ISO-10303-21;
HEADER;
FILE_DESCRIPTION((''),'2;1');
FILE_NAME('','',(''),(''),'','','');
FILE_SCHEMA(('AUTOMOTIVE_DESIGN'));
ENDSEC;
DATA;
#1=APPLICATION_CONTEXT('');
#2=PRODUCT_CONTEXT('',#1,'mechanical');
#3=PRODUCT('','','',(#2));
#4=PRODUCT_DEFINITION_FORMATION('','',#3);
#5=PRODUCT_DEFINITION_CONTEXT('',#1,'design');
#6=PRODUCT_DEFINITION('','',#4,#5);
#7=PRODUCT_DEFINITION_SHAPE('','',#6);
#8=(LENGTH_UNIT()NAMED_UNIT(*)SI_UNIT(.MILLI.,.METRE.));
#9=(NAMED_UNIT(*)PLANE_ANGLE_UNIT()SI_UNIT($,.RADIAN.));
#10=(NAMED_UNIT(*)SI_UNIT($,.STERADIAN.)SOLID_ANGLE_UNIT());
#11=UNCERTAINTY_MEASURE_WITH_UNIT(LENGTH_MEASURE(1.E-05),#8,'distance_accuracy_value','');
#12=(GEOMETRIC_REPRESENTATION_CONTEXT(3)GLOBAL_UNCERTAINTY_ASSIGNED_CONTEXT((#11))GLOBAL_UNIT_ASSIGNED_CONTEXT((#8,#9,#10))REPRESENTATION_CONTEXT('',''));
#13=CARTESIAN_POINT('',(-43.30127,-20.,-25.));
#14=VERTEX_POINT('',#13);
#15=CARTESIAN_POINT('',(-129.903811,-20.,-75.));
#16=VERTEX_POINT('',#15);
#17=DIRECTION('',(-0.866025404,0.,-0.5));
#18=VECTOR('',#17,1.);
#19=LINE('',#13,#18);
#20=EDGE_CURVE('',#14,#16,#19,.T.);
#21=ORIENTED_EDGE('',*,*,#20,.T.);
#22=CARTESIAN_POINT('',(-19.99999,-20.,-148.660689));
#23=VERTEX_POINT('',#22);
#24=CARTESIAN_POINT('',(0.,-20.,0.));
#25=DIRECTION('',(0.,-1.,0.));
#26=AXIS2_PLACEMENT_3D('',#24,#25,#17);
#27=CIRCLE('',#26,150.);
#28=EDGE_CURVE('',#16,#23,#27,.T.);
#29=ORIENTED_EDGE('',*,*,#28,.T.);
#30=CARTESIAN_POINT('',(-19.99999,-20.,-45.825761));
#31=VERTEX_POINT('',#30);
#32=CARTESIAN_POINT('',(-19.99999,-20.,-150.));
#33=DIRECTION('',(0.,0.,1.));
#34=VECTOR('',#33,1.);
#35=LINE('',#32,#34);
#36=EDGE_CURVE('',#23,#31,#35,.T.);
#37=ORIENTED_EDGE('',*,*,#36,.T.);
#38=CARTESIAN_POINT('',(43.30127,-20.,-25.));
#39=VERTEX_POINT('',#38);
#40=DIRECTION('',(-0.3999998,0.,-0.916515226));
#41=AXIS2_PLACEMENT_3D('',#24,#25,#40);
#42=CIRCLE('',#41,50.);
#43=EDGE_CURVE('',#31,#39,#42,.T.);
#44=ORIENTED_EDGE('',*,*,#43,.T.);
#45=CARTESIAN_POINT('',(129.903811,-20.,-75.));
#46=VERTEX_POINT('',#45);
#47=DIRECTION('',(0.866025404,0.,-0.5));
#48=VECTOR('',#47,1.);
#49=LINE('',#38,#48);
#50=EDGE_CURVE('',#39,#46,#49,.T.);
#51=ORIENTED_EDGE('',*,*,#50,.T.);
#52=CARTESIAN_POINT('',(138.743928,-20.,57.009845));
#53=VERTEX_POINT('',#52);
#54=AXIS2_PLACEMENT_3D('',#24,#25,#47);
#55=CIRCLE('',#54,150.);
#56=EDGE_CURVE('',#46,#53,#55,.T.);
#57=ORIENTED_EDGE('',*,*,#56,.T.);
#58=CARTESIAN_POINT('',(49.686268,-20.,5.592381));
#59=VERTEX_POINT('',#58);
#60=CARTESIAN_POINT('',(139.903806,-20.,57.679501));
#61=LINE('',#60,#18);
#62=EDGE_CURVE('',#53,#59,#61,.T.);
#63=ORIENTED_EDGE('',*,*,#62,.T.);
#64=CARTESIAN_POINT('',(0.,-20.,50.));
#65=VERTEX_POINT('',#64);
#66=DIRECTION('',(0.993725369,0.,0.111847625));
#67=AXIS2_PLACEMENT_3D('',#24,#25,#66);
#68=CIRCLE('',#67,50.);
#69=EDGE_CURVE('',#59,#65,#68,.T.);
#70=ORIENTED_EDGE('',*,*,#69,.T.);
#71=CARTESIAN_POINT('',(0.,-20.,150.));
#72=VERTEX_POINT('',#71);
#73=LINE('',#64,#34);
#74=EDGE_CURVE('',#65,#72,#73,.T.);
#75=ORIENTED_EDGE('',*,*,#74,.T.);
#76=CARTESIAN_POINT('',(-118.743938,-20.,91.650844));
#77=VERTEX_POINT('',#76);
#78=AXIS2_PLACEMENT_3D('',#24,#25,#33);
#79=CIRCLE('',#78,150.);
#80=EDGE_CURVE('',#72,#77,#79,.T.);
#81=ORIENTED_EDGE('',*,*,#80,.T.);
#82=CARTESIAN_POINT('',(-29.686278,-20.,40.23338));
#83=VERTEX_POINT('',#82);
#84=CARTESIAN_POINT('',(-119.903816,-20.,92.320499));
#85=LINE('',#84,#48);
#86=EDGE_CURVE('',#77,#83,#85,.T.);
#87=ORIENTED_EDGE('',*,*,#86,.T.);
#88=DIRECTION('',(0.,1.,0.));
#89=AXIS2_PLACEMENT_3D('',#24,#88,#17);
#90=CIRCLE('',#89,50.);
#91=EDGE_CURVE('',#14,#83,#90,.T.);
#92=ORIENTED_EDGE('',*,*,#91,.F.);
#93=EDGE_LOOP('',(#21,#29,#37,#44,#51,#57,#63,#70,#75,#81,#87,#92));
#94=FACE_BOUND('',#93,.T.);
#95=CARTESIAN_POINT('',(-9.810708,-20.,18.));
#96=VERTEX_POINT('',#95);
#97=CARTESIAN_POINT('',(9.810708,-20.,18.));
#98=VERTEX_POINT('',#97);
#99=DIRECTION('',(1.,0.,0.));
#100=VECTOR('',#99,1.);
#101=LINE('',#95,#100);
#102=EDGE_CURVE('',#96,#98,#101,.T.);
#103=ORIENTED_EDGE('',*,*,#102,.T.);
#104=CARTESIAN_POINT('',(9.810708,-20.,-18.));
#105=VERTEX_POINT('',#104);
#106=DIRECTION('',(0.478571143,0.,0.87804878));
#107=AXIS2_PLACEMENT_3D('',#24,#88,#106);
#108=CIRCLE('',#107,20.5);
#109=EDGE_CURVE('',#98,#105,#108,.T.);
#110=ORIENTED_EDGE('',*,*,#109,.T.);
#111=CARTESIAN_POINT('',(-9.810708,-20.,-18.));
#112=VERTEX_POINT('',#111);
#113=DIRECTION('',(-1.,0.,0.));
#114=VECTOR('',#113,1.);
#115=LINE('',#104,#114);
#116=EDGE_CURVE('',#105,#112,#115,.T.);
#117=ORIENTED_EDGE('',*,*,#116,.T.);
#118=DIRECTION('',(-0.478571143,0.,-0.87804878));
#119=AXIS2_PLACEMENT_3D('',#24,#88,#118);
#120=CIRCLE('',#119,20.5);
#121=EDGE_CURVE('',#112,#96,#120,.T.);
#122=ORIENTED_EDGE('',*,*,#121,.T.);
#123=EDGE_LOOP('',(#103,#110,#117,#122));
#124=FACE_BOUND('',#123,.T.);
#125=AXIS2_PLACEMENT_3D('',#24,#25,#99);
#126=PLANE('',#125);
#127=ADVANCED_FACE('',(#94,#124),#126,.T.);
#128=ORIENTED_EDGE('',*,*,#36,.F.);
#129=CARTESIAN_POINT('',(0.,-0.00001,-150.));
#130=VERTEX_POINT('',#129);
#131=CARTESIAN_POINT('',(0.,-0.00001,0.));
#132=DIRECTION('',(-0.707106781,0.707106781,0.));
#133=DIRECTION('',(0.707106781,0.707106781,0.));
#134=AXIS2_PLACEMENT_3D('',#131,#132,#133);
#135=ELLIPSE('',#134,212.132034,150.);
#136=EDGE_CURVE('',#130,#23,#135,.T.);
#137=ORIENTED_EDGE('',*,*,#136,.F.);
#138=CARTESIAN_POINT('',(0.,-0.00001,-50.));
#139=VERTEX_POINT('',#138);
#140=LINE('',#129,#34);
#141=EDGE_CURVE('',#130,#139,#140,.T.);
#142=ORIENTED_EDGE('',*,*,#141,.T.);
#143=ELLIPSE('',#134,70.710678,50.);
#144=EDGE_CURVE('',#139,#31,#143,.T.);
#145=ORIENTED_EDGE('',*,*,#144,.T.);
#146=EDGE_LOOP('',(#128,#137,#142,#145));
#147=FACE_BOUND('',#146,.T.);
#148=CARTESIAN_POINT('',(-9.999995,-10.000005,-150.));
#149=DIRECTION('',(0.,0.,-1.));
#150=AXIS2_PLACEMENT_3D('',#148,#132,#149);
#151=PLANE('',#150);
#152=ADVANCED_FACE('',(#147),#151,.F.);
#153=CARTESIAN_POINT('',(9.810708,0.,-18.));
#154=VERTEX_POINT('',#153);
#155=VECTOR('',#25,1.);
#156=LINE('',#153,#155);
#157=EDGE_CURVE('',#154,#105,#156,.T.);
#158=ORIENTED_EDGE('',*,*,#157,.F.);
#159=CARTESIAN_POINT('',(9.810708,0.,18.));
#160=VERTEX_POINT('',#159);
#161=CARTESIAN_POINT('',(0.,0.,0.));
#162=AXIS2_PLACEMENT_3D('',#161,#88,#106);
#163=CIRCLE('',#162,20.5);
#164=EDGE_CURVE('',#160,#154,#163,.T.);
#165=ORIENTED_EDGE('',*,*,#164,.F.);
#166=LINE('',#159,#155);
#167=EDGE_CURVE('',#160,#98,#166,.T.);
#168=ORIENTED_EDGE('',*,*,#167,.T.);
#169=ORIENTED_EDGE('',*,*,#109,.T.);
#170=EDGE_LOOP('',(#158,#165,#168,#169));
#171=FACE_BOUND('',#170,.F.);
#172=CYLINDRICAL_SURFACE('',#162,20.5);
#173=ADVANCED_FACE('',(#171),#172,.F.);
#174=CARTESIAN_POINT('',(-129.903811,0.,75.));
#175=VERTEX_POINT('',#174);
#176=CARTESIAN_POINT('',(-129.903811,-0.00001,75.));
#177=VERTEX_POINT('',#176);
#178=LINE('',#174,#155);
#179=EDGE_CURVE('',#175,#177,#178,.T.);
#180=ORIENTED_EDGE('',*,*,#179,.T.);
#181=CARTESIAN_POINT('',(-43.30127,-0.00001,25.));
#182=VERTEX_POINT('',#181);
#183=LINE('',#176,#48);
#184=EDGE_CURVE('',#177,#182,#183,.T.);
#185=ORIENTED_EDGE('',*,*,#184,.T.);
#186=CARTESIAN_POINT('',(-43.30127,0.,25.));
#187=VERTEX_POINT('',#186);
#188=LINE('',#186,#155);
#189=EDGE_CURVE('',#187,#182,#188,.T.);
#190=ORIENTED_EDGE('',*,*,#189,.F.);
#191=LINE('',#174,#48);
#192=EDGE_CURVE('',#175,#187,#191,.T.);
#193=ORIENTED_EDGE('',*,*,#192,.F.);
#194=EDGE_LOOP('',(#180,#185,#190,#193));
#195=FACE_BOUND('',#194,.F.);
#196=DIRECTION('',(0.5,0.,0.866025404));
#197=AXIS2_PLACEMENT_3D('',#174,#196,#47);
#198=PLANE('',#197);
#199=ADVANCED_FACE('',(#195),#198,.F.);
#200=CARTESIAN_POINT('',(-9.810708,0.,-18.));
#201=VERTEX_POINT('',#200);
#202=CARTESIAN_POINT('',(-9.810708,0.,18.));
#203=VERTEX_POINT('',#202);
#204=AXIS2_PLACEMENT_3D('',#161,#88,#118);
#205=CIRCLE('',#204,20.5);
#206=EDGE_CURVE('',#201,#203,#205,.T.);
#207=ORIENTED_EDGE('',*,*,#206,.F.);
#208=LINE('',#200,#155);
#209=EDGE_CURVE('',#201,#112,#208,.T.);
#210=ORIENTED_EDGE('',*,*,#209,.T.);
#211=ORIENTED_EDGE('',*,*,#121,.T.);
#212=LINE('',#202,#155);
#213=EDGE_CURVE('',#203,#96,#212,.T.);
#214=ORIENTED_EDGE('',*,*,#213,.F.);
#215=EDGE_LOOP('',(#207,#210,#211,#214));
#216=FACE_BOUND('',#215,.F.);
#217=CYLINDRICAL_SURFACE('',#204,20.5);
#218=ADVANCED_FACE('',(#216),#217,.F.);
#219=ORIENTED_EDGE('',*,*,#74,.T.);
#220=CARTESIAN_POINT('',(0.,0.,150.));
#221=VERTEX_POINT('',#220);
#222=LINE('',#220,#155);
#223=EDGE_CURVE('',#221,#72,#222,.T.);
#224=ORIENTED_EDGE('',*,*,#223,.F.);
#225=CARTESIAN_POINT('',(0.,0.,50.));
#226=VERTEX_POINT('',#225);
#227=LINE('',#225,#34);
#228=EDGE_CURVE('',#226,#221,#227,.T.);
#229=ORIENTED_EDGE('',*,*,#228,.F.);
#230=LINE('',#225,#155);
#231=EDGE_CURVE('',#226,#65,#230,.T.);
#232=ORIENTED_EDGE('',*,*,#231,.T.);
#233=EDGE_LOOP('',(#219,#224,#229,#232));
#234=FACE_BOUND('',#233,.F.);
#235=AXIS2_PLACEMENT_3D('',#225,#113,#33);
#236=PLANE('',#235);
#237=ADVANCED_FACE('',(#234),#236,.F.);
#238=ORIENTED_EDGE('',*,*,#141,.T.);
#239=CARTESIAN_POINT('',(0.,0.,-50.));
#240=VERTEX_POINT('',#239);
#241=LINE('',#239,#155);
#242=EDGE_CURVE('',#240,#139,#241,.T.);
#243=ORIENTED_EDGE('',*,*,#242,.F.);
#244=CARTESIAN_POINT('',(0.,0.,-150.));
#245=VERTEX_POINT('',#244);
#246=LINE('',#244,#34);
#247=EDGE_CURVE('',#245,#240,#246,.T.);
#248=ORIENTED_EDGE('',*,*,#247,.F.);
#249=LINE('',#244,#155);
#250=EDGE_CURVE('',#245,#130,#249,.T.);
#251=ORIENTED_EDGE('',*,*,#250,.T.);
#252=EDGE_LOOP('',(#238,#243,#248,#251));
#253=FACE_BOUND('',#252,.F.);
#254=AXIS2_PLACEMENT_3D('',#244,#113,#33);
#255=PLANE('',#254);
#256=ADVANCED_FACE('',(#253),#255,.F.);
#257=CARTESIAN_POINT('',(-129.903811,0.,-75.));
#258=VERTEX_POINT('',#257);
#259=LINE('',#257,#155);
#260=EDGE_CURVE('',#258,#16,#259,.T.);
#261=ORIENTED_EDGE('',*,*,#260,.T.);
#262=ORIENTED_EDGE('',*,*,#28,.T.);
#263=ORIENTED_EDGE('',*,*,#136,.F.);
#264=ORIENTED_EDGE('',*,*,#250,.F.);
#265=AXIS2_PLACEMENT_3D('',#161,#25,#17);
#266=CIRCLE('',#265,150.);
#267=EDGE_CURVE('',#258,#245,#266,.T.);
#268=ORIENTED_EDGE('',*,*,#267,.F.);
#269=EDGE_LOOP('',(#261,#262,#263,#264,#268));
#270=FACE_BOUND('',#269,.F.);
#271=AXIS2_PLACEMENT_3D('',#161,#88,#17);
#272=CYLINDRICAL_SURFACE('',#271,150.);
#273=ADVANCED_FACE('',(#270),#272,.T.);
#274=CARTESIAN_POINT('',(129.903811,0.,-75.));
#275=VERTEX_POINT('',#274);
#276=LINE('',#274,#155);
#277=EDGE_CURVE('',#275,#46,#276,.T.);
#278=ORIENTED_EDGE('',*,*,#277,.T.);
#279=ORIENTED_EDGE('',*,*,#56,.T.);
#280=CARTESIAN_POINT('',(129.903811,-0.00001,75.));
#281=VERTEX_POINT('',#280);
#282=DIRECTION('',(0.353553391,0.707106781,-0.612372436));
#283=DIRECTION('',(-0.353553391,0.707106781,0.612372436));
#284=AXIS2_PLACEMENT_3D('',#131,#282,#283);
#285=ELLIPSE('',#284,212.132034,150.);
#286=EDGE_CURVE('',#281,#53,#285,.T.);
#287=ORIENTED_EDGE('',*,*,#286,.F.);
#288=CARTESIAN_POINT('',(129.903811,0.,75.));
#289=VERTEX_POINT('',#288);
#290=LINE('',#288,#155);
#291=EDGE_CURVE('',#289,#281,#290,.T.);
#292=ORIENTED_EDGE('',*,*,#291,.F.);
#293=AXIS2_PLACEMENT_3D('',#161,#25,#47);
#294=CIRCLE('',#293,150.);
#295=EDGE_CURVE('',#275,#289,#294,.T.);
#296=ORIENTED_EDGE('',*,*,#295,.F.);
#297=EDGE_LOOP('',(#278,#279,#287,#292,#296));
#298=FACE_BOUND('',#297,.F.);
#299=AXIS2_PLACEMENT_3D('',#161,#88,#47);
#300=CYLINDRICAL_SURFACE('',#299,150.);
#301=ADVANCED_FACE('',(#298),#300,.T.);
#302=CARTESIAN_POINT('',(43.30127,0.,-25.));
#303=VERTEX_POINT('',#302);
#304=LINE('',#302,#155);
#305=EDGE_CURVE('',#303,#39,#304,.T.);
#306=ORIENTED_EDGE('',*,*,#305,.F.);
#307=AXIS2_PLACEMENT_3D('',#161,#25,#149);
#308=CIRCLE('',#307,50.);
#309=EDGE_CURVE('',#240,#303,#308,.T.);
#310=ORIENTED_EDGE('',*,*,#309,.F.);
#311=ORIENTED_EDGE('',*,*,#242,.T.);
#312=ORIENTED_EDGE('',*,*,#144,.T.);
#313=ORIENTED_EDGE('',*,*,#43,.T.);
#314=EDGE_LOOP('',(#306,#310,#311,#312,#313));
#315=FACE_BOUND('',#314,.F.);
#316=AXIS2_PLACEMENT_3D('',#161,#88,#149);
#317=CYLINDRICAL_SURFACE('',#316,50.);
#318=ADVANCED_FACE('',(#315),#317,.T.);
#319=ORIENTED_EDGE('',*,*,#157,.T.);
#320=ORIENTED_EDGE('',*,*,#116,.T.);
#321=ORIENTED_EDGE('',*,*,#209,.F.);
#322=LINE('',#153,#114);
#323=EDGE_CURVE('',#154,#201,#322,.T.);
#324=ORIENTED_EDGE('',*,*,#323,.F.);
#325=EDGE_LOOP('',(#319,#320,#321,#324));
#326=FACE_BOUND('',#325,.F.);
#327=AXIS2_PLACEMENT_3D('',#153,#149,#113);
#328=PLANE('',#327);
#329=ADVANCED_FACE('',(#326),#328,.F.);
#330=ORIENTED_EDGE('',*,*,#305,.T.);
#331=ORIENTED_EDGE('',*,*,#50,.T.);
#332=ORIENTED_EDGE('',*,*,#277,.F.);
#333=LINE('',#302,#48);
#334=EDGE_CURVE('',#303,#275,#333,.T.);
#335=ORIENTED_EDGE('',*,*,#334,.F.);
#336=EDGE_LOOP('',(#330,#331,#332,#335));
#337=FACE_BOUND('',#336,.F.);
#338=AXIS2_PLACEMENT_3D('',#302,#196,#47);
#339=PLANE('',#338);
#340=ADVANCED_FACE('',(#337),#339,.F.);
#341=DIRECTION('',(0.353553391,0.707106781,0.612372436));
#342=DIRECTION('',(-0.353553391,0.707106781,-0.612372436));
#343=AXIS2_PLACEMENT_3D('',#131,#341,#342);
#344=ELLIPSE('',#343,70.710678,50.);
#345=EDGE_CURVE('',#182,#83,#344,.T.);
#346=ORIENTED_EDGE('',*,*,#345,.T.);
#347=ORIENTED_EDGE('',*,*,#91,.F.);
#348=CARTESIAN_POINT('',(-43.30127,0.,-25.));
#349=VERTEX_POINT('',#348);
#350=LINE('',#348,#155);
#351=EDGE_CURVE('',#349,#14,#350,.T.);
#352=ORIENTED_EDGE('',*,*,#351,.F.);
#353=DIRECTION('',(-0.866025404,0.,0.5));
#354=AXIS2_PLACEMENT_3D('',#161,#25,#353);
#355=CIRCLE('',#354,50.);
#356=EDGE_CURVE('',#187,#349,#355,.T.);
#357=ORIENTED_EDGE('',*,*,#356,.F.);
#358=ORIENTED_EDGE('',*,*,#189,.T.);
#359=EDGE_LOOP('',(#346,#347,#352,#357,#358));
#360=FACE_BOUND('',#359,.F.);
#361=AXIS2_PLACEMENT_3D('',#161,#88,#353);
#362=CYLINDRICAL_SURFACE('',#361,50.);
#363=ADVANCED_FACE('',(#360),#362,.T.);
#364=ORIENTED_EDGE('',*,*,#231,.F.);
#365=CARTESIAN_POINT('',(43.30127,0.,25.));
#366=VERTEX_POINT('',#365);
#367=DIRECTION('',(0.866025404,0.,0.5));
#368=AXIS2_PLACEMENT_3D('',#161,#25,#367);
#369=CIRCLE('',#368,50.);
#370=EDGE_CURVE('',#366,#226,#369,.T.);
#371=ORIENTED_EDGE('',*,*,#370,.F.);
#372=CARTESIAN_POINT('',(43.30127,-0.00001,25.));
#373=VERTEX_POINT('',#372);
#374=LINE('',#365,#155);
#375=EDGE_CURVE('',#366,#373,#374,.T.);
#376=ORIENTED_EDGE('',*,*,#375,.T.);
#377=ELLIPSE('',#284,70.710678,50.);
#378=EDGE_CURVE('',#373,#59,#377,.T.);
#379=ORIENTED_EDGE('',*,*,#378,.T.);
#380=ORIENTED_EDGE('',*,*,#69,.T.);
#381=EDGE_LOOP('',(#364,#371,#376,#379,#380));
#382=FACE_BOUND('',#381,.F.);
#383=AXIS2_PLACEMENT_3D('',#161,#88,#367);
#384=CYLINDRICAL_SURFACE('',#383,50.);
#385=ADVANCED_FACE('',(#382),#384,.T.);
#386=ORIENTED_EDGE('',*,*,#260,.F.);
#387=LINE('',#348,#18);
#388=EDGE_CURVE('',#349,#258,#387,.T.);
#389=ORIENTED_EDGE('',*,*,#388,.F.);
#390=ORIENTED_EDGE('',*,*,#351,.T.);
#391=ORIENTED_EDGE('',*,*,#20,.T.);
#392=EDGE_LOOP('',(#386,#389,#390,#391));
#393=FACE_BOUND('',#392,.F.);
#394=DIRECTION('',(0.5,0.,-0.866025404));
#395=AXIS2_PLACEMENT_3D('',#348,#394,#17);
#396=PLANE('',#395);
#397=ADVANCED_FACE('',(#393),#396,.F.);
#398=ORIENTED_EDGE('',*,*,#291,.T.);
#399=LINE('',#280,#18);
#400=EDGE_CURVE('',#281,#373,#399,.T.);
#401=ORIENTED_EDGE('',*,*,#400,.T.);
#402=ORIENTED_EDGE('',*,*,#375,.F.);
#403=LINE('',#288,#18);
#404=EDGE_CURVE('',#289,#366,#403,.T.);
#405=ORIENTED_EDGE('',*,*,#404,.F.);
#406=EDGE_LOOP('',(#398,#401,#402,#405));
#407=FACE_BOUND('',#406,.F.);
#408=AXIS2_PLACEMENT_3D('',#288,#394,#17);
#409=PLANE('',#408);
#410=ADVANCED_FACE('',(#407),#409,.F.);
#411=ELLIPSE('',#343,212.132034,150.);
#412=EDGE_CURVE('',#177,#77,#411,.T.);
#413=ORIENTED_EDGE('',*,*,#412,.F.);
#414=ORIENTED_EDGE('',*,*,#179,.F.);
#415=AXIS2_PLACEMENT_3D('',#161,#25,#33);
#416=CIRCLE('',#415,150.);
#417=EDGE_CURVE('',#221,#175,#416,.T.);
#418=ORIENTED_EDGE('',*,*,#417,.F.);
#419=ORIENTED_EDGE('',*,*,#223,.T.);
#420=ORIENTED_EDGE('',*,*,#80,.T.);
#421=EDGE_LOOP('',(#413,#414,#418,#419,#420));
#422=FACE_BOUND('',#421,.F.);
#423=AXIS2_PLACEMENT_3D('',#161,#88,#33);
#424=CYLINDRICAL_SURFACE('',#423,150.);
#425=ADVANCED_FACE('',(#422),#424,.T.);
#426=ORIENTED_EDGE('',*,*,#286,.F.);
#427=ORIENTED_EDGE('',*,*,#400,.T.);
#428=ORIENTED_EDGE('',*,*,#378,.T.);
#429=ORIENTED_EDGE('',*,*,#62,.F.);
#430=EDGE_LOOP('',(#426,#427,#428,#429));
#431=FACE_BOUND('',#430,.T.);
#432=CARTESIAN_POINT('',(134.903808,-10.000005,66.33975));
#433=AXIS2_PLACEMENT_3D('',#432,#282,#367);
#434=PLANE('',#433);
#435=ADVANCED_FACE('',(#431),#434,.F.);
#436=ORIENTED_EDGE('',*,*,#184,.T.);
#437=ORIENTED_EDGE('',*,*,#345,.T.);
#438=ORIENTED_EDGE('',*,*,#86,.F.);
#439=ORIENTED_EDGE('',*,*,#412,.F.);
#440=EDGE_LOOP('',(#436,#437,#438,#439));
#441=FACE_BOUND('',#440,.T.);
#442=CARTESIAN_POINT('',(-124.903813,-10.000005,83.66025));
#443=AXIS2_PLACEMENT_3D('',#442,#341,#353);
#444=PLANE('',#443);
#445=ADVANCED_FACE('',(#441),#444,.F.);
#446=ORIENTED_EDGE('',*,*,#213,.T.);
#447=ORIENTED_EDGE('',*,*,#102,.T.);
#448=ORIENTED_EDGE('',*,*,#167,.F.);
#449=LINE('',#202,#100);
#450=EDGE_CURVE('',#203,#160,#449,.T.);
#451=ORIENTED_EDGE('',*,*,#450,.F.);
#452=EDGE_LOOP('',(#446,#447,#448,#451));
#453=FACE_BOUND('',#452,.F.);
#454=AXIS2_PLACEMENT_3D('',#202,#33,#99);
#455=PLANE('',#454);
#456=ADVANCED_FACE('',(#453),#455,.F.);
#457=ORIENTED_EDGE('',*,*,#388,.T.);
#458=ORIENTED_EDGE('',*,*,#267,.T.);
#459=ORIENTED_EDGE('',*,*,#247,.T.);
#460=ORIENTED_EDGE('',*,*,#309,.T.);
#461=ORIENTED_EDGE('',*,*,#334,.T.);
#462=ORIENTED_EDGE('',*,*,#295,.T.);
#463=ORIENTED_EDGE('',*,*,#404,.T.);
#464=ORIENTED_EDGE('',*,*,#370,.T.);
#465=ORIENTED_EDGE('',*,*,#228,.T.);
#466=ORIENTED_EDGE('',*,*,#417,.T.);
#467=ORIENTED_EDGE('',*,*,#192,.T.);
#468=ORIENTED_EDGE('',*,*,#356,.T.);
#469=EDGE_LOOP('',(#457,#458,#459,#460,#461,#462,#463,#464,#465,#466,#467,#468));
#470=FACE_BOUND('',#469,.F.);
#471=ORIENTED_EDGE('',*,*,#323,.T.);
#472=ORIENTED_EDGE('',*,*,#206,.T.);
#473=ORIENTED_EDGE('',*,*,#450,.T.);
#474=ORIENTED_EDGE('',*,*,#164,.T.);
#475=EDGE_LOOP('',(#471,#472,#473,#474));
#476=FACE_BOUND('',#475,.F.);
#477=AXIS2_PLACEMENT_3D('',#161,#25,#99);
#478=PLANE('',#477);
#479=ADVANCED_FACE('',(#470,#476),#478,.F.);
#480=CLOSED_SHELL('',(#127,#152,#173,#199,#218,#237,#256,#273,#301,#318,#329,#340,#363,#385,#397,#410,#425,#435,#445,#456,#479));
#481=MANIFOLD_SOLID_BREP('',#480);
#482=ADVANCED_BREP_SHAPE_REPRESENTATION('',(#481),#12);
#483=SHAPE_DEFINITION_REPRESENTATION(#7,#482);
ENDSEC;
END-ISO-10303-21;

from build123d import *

# Parameters (mm, degrees)
F1_DEPTH = 20
F2_SIZE  = 19.99999


# Not quite as in the source:
# - a fillet or chamfer is up to 0.001 mm smaller than in the source, because OpenCascade refuses the exact size


with BuildPart() as f1:
    # F0 (on Front) → F1 (new body)
    with BuildSketch(Plane.XZ):
        with BuildLine():
            Line((-129.9038105677, 75), (-43.3012701892, 25))
            ThreePointArc((-43.3012701892, 25), (-50, 0), (-43.3012701892, -25))
            Line((-43.3012701892, -25), (-129.9038105677, -75))
            ThreePointArc((-129.9038105677, -75), (-75, -129.9038105677), (0, -150))
            Line((0, -150), (0, -50))
            ThreePointArc((0, -50), (25, -43.3012701892), (43.3012701892, -25))
            Line((43.3012701892, -25), (129.9038105677, -75))
            ThreePointArc((129.9038105677, -75), (150, 0), (129.9038105677, 75))
            Line((129.9038105677, 75), (43.3012701892, 25))
            ThreePointArc((43.3012701892, 25), (25, 43.3012701892), (0, 50))
            Line((0, 50), (0, 150))
            ThreePointArc((0, 150), (-75, 129.9038105677), (-129.9038105677, 75))
        make_face()
        with BuildLine():
            ThreePointArc((-9.8107084352, -18), (-20.5, 0), (-9.8107084352, 18))
            Line((-9.8107084352, 18), (9.8107084352, 18))
            ThreePointArc((9.8107084352, 18), (20.5, 0), (9.8107084352, -18))
            Line((9.8107084352, -18), (-9.8107084352, -18))
        make_face(mode=Mode.SUBTRACT)
    extrude(amount=F1_DEPTH)

    # F2 (size 20 in the source; OpenCascade refuses exactly that, so slightly less here)
    f2_edges = [f1.edges().sort_by_distance(p)[0] for p in [
        (-86.60254, -20, 50),
        (0, -20, -100),
        (86.60254, -20, 50),
    ]]
    chamfer(f2_edges, length=F2_SIZE)


solid = f1.part
